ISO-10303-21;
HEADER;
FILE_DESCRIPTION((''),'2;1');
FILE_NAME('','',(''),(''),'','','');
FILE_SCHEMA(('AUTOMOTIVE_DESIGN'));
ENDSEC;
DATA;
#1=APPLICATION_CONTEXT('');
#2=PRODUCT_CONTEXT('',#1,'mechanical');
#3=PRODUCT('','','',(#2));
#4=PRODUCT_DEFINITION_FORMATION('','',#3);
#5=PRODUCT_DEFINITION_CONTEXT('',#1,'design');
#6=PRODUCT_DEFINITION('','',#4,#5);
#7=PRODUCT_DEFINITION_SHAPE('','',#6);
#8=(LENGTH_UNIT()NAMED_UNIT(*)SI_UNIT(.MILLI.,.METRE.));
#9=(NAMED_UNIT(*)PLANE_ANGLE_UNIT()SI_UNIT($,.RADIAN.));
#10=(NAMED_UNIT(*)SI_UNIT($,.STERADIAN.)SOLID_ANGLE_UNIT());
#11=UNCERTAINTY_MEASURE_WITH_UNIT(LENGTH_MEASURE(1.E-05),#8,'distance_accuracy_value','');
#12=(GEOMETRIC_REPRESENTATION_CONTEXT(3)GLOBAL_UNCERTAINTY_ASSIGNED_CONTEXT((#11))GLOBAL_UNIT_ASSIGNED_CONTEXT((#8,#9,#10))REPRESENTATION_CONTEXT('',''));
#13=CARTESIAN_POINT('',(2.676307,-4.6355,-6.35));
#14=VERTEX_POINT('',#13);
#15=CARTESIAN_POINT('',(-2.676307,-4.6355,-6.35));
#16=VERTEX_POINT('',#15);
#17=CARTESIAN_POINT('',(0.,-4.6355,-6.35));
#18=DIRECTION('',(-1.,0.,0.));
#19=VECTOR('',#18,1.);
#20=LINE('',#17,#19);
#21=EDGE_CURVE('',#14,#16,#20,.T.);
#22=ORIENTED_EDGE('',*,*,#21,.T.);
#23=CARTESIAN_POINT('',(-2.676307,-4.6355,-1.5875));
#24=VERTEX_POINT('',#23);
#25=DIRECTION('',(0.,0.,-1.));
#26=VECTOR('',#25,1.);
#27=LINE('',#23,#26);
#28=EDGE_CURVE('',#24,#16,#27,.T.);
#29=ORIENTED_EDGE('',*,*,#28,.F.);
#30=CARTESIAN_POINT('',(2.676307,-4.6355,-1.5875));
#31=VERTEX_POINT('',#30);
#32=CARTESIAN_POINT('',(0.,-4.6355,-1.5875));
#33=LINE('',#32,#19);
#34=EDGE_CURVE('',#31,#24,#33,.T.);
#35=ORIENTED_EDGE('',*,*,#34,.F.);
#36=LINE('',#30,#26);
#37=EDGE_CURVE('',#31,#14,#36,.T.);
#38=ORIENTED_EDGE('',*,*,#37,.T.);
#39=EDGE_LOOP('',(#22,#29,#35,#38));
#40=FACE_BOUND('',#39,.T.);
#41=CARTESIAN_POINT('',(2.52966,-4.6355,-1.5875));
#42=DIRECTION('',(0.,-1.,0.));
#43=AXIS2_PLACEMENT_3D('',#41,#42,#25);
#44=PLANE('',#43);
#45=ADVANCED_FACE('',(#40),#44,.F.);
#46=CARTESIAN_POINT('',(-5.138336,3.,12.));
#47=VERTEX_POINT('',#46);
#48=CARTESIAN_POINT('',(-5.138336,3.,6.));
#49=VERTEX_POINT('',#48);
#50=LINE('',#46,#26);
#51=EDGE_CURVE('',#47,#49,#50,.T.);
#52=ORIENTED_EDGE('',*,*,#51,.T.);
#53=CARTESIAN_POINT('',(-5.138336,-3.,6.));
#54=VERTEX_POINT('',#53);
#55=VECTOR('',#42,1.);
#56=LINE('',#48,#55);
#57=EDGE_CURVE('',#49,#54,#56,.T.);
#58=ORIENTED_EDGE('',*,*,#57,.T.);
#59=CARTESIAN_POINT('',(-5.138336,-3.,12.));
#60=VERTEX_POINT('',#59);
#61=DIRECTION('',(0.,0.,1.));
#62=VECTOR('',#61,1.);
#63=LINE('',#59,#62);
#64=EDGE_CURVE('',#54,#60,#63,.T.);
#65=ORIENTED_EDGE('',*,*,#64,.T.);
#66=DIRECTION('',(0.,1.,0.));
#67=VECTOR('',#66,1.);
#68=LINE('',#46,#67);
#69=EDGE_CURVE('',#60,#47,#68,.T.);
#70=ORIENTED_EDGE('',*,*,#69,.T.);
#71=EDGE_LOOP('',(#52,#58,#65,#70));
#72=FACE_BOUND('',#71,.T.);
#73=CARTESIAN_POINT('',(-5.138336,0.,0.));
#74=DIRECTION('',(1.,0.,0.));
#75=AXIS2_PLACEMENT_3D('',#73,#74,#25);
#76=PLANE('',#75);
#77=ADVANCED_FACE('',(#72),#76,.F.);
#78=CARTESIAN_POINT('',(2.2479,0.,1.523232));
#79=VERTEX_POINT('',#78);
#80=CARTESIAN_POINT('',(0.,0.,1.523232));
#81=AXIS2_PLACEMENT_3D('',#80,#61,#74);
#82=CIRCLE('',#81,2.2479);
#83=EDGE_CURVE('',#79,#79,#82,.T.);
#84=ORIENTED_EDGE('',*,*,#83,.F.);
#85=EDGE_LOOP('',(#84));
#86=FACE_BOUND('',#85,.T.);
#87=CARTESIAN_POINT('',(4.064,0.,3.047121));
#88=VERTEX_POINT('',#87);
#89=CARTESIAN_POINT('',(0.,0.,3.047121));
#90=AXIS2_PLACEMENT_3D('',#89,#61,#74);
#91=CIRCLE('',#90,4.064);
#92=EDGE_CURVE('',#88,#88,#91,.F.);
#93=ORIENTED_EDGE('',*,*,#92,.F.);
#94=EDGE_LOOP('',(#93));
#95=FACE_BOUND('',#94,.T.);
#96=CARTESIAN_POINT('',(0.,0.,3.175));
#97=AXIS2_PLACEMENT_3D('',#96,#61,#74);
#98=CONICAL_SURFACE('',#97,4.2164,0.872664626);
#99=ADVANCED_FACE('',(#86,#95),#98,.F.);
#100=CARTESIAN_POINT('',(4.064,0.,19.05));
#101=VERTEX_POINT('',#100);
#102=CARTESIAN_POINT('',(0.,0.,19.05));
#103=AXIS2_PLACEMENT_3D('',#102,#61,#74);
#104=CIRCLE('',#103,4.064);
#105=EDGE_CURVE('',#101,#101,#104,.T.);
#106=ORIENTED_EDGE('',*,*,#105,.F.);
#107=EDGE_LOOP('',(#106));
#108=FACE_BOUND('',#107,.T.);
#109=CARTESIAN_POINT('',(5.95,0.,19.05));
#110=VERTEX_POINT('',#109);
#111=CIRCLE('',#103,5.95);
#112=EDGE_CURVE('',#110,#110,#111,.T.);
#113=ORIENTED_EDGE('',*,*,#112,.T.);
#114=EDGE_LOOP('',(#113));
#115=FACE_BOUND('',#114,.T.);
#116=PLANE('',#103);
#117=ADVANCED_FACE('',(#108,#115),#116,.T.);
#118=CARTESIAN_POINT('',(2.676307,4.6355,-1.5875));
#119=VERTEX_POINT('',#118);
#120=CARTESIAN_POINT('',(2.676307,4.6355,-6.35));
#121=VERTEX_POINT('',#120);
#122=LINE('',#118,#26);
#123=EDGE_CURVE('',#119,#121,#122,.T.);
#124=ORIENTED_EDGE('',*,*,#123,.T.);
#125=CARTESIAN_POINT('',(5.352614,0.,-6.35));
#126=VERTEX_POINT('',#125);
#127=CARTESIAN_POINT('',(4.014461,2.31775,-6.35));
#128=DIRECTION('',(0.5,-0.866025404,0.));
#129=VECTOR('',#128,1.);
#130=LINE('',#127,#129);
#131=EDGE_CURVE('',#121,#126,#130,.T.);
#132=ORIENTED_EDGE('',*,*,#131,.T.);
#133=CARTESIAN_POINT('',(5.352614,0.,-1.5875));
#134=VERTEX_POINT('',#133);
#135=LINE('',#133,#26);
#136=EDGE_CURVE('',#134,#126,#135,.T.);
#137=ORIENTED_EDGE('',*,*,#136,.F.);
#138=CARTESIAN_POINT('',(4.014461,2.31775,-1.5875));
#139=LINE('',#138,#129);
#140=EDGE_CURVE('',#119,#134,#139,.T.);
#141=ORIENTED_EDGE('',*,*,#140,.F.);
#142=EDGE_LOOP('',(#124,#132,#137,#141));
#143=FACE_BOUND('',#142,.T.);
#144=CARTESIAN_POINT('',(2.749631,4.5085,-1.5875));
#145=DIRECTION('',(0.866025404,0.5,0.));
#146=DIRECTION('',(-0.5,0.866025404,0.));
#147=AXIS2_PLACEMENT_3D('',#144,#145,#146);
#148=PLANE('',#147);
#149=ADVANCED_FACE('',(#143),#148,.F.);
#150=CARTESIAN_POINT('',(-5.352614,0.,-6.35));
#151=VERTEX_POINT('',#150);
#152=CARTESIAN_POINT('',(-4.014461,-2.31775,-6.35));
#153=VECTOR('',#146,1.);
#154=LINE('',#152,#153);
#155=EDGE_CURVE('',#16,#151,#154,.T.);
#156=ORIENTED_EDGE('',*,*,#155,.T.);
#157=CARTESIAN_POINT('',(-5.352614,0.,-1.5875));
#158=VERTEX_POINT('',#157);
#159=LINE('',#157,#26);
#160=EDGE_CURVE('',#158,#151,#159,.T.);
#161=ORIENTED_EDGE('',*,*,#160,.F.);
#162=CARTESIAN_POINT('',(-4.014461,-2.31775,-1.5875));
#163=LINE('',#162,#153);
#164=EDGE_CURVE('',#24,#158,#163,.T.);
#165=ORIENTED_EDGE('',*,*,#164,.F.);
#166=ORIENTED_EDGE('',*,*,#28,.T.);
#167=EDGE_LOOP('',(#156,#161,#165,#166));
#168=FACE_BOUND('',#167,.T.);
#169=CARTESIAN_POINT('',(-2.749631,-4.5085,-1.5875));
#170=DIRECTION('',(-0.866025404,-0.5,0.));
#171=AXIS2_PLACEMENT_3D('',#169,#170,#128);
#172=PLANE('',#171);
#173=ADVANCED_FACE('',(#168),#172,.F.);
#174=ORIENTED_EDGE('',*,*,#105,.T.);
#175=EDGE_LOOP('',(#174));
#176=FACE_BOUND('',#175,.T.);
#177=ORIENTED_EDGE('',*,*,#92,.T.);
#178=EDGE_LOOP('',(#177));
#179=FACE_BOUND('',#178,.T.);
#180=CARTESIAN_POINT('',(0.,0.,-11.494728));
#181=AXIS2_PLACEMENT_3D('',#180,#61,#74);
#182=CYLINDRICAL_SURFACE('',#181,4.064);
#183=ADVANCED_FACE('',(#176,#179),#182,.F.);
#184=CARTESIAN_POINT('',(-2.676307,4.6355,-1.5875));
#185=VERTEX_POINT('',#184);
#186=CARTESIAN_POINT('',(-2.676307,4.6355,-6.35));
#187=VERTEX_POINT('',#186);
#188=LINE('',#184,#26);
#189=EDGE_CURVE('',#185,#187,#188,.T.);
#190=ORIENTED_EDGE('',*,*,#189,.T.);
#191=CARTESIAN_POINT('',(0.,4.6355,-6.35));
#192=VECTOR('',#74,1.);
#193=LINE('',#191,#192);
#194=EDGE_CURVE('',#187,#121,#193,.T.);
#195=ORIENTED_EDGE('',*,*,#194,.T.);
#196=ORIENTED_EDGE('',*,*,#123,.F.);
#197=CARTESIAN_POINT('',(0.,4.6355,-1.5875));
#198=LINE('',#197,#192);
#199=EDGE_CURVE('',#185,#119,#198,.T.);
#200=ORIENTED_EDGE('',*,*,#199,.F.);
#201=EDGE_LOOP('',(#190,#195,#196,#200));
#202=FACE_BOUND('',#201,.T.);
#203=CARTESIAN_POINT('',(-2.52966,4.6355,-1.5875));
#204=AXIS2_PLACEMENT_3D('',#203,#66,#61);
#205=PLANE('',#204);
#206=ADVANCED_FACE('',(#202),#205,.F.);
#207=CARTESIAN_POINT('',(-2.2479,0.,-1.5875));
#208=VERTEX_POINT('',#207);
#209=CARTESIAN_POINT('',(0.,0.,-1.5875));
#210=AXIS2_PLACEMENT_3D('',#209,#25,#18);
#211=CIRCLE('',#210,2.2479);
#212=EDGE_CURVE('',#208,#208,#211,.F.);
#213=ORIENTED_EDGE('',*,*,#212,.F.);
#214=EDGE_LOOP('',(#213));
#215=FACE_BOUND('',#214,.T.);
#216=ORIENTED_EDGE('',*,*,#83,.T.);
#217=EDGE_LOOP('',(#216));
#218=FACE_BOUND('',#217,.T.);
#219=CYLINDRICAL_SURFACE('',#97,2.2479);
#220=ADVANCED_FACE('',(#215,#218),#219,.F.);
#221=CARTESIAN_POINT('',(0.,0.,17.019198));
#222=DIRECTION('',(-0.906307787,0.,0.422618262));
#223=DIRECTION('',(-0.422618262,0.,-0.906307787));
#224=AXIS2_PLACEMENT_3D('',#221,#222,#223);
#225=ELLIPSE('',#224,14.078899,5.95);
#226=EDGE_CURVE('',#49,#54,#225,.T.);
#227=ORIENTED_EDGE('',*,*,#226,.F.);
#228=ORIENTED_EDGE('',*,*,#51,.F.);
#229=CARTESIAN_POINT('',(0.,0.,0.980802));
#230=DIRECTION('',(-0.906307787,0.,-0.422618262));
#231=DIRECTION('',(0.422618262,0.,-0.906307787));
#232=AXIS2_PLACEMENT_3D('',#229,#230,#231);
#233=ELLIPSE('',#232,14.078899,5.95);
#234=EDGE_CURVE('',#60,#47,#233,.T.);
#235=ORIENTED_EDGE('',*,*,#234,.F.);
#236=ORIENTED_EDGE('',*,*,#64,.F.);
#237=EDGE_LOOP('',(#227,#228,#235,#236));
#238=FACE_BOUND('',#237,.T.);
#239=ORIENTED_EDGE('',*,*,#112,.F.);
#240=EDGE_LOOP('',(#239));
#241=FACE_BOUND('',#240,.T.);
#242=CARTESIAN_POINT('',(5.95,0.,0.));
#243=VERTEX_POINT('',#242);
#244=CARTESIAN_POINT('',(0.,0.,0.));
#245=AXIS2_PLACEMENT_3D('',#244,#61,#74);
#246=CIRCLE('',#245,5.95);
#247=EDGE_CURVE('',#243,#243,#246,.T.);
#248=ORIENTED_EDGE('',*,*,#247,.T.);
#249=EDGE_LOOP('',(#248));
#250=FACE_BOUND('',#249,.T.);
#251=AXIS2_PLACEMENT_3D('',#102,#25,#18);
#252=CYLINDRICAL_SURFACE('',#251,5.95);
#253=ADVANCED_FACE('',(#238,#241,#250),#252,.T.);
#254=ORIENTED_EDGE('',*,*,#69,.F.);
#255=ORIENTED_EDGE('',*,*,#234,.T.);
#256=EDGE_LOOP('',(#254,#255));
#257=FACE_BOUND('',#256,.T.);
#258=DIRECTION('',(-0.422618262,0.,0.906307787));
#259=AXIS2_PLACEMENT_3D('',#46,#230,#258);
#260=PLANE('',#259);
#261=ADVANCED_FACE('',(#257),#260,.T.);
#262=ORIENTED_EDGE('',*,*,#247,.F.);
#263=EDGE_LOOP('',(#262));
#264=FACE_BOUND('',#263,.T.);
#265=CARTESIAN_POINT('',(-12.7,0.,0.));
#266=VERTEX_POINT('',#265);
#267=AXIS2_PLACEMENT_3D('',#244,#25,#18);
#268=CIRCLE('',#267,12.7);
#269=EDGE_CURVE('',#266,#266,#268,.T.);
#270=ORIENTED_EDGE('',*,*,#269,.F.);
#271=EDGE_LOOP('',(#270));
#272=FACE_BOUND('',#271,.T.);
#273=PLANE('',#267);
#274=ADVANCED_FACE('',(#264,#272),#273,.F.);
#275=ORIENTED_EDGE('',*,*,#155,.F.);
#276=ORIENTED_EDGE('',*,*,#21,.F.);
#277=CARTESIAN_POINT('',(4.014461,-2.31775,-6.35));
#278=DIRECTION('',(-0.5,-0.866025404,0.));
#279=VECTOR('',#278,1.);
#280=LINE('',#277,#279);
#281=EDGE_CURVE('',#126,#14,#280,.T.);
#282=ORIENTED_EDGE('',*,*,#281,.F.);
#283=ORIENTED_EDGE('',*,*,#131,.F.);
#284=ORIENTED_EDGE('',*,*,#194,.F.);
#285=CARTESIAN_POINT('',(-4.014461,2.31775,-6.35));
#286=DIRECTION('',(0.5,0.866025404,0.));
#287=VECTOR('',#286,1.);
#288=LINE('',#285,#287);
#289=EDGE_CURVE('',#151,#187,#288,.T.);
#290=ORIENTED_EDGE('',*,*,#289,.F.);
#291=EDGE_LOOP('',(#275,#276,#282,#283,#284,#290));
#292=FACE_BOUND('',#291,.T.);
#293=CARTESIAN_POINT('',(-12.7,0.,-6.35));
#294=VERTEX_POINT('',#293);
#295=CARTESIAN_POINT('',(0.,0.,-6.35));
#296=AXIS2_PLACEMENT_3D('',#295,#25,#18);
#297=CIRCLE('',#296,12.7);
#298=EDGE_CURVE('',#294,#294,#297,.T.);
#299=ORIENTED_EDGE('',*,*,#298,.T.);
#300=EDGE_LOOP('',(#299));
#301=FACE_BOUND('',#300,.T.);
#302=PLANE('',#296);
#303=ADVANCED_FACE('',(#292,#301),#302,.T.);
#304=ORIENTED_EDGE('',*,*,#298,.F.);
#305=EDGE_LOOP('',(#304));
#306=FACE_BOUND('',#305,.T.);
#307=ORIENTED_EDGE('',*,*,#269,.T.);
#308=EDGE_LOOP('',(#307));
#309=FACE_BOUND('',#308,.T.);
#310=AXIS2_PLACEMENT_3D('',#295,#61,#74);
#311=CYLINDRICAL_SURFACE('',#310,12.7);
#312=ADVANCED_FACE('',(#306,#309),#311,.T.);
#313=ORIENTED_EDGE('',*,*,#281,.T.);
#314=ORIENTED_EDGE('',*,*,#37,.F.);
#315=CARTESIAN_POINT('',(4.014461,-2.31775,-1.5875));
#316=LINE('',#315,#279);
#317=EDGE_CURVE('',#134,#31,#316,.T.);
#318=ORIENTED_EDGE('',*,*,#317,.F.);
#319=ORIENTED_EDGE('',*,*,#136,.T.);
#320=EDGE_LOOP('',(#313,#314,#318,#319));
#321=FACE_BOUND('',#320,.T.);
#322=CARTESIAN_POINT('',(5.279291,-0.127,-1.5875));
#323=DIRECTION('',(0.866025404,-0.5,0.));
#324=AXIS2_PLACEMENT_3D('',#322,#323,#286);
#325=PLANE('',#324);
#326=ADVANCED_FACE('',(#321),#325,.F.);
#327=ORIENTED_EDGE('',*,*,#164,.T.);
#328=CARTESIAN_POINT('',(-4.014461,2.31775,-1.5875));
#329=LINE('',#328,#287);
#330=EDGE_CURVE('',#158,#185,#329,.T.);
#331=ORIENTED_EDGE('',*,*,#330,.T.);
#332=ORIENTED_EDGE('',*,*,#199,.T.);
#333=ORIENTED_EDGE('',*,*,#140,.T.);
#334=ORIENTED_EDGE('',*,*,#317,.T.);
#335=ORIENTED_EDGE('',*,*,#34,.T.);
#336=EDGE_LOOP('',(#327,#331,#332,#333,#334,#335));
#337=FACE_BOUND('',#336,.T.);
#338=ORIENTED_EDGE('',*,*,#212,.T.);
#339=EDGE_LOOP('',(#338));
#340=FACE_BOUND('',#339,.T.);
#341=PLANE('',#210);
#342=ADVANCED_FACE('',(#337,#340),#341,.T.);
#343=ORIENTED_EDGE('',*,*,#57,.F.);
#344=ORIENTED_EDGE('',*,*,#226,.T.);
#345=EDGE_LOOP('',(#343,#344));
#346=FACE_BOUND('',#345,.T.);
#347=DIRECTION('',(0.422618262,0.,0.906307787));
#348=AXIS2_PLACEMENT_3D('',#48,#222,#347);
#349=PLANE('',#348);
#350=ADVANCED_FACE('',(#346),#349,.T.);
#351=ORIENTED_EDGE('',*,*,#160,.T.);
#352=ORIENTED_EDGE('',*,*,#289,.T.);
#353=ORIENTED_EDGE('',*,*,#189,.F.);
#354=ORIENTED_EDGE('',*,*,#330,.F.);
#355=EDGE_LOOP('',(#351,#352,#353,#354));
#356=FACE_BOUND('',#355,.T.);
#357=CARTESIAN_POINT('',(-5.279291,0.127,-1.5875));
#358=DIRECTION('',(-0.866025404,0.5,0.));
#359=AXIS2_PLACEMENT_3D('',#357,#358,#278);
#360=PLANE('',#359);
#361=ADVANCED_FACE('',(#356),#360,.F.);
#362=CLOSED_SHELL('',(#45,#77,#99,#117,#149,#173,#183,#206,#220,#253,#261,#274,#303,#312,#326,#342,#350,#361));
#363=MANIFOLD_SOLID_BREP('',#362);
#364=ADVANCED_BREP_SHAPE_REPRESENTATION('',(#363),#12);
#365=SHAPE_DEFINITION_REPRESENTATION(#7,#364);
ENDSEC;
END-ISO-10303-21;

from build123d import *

# Parameters (mm, degrees)
SKETCH1_R           = 5.95
BOSS_EXTRUDE1_DEPTH = 19.05
SKETCH2_R           = 12.7
BOSS_EXTRUDE2_DEPTH = 6.35
SKETCH3_R           = 4.064
CUT_EXTRUDE1_DEPTH  = 15.875
BOSS_EXTRUDE3_REACH = 25.971
SKETCH7_R           = 4.2164
SKETCH7_R_2         = 4.064
CUT_EXTRUDE2_DEPTH  = 4.7625
MOVE_START          = -6.35
MOVE_FACE1_DEPTH    = 4.7625
SKETCH9_W           = 6
SKETCH9_H           = 6
CUT_EXTRUDE3_DEPTH  = 30.024106225
DRAFT1_ANGLE        = 65


# Read off the part's stored shape, not the designer's step: Move Face1
with BuildPart() as part:
    # Sketch1 → Boss-Extrude1 (new body)
    with BuildSketch(Plane.XY):
        with Locations(Location((0, 0, 0), (0, 0, 180))):
            Circle(SKETCH1_R)
    extrude(amount=BOSS_EXTRUDE1_DEPTH)

    # Sketch2 → Boss-Extrude2 (add)
    with BuildSketch(Plane(origin=(0, 0, 0), x_dir=(-1, 0, 0), z_dir=(0, 0, -1))):
        Circle(SKETCH2_R)
    extrude(amount=BOSS_EXTRUDE2_DEPTH)

    # Sketch3 → Cut-Extrude1 (cut)
    with BuildSketch(Plane.XY.offset(19.05)):
        Circle(SKETCH3_R)
    extrude(amount=-CUT_EXTRUDE1_DEPTH, mode=Mode.SUBTRACT)

    # Sketch6 → CSK for #8 Flat Head Machine Screw (100)1 (revolve, cut)
    with BuildSketch(Plane(origin=(0, 0, 3.175), x_dir=(0, -1, 0), z_dir=(1, 0, 0))):
        Polygon((0, 0), (0, 9.525), (2.2479, 9.525), (2.2479, 1.651767624), (4.2164, 0), align=None)
    revolve(axis=Axis((0, 0, 9.525), (0, 0, -1)), mode=Mode.SUBTRACT)

    # Sketch7 → Boss-Extrude3 (add, up to next)
    with BuildSketch(Plane(origin=(0, 0, 3.175), x_dir=(-1, 0, 0), z_dir=(0, 0, -1)), mode=Mode.PRIVATE) as boss_extrude3_sk1:
        Circle(SKETCH7_R)
        with Locations(Location((0, 0, 0), (0, 0, 180))):
            Circle(SKETCH7_R_2, mode=Mode.SUBTRACT)
    boss_extrude3_tool1 = extrude(boss_extrude3_sk1.sketch, amount=BOSS_EXTRUDE3_REACH, mode=Mode.PRIVATE) - part.part
    add(boss_extrude3_tool1.solids().sort_by_distance((4.097142, 0, 3.175))[0])

    # Sketch8 → Cut-Extrude2 (cut)
    with BuildSketch(Plane(origin=(0, 0, -6.35), x_dir=(-1, 0, 0), z_dir=(0, 0, -1))):
        Polygon((2.529660204, -4.3815), (5.059320409, 0), (2.529660204, 4.3815), (-2.529660204, 4.3815), (-5.059320409, 0), (-2.529660204, -4.3815), align=None)
    extrude(amount=-CUT_EXTRUDE2_DEPTH, mode=Mode.SUBTRACT)

    # Move Face1 outline → Move Face1 (cut)
    with BuildSketch(Plane.XY.offset(MOVE_START)):
        Polygon((-5.352614346, 0), (-2.676307173, -4.6355), (2.676307173, -4.6355), (5.352614346, 0), (2.676307173, 4.6355), (-2.676307173, 4.6355), align=None)
        Polygon((2.529660204, -4.3815), (-2.529660204, -4.3815), (-5.059320409, 0), (-2.529660204, 4.3815), (2.529660204, 4.3815), (5.059320409, 0), align=None, mode=Mode.SUBTRACT)
    extrude(amount=MOVE_FACE1_DEPTH, mode=Mode.SUBTRACT)

    # Sketch9 → Cut-Extrude3 (cut, through all)
    with BuildSketch(Plane.ZY.offset(5.138336307)):
        with Locations((9, 0)):
            Rectangle(SKETCH9_W, SKETCH9_H)
    extrude(amount=CUT_EXTRUDE3_DEPTH, mode=Mode.SUBTRACT)

    # Draft1
    draft1_faces = [part.faces().sort_by_distance(p)[0] for p in [
        (-5.464978006, 0, 12),
        (-5.464978006, 0, 6),
    ]]
    draft(draft1_faces, Plane(origin=(-5.138336307, 0, 0), x_dir=(0, 0, -1), z_dir=(-1, 0, 0)), DRAFT1_ANGLE)


solid = part.part
